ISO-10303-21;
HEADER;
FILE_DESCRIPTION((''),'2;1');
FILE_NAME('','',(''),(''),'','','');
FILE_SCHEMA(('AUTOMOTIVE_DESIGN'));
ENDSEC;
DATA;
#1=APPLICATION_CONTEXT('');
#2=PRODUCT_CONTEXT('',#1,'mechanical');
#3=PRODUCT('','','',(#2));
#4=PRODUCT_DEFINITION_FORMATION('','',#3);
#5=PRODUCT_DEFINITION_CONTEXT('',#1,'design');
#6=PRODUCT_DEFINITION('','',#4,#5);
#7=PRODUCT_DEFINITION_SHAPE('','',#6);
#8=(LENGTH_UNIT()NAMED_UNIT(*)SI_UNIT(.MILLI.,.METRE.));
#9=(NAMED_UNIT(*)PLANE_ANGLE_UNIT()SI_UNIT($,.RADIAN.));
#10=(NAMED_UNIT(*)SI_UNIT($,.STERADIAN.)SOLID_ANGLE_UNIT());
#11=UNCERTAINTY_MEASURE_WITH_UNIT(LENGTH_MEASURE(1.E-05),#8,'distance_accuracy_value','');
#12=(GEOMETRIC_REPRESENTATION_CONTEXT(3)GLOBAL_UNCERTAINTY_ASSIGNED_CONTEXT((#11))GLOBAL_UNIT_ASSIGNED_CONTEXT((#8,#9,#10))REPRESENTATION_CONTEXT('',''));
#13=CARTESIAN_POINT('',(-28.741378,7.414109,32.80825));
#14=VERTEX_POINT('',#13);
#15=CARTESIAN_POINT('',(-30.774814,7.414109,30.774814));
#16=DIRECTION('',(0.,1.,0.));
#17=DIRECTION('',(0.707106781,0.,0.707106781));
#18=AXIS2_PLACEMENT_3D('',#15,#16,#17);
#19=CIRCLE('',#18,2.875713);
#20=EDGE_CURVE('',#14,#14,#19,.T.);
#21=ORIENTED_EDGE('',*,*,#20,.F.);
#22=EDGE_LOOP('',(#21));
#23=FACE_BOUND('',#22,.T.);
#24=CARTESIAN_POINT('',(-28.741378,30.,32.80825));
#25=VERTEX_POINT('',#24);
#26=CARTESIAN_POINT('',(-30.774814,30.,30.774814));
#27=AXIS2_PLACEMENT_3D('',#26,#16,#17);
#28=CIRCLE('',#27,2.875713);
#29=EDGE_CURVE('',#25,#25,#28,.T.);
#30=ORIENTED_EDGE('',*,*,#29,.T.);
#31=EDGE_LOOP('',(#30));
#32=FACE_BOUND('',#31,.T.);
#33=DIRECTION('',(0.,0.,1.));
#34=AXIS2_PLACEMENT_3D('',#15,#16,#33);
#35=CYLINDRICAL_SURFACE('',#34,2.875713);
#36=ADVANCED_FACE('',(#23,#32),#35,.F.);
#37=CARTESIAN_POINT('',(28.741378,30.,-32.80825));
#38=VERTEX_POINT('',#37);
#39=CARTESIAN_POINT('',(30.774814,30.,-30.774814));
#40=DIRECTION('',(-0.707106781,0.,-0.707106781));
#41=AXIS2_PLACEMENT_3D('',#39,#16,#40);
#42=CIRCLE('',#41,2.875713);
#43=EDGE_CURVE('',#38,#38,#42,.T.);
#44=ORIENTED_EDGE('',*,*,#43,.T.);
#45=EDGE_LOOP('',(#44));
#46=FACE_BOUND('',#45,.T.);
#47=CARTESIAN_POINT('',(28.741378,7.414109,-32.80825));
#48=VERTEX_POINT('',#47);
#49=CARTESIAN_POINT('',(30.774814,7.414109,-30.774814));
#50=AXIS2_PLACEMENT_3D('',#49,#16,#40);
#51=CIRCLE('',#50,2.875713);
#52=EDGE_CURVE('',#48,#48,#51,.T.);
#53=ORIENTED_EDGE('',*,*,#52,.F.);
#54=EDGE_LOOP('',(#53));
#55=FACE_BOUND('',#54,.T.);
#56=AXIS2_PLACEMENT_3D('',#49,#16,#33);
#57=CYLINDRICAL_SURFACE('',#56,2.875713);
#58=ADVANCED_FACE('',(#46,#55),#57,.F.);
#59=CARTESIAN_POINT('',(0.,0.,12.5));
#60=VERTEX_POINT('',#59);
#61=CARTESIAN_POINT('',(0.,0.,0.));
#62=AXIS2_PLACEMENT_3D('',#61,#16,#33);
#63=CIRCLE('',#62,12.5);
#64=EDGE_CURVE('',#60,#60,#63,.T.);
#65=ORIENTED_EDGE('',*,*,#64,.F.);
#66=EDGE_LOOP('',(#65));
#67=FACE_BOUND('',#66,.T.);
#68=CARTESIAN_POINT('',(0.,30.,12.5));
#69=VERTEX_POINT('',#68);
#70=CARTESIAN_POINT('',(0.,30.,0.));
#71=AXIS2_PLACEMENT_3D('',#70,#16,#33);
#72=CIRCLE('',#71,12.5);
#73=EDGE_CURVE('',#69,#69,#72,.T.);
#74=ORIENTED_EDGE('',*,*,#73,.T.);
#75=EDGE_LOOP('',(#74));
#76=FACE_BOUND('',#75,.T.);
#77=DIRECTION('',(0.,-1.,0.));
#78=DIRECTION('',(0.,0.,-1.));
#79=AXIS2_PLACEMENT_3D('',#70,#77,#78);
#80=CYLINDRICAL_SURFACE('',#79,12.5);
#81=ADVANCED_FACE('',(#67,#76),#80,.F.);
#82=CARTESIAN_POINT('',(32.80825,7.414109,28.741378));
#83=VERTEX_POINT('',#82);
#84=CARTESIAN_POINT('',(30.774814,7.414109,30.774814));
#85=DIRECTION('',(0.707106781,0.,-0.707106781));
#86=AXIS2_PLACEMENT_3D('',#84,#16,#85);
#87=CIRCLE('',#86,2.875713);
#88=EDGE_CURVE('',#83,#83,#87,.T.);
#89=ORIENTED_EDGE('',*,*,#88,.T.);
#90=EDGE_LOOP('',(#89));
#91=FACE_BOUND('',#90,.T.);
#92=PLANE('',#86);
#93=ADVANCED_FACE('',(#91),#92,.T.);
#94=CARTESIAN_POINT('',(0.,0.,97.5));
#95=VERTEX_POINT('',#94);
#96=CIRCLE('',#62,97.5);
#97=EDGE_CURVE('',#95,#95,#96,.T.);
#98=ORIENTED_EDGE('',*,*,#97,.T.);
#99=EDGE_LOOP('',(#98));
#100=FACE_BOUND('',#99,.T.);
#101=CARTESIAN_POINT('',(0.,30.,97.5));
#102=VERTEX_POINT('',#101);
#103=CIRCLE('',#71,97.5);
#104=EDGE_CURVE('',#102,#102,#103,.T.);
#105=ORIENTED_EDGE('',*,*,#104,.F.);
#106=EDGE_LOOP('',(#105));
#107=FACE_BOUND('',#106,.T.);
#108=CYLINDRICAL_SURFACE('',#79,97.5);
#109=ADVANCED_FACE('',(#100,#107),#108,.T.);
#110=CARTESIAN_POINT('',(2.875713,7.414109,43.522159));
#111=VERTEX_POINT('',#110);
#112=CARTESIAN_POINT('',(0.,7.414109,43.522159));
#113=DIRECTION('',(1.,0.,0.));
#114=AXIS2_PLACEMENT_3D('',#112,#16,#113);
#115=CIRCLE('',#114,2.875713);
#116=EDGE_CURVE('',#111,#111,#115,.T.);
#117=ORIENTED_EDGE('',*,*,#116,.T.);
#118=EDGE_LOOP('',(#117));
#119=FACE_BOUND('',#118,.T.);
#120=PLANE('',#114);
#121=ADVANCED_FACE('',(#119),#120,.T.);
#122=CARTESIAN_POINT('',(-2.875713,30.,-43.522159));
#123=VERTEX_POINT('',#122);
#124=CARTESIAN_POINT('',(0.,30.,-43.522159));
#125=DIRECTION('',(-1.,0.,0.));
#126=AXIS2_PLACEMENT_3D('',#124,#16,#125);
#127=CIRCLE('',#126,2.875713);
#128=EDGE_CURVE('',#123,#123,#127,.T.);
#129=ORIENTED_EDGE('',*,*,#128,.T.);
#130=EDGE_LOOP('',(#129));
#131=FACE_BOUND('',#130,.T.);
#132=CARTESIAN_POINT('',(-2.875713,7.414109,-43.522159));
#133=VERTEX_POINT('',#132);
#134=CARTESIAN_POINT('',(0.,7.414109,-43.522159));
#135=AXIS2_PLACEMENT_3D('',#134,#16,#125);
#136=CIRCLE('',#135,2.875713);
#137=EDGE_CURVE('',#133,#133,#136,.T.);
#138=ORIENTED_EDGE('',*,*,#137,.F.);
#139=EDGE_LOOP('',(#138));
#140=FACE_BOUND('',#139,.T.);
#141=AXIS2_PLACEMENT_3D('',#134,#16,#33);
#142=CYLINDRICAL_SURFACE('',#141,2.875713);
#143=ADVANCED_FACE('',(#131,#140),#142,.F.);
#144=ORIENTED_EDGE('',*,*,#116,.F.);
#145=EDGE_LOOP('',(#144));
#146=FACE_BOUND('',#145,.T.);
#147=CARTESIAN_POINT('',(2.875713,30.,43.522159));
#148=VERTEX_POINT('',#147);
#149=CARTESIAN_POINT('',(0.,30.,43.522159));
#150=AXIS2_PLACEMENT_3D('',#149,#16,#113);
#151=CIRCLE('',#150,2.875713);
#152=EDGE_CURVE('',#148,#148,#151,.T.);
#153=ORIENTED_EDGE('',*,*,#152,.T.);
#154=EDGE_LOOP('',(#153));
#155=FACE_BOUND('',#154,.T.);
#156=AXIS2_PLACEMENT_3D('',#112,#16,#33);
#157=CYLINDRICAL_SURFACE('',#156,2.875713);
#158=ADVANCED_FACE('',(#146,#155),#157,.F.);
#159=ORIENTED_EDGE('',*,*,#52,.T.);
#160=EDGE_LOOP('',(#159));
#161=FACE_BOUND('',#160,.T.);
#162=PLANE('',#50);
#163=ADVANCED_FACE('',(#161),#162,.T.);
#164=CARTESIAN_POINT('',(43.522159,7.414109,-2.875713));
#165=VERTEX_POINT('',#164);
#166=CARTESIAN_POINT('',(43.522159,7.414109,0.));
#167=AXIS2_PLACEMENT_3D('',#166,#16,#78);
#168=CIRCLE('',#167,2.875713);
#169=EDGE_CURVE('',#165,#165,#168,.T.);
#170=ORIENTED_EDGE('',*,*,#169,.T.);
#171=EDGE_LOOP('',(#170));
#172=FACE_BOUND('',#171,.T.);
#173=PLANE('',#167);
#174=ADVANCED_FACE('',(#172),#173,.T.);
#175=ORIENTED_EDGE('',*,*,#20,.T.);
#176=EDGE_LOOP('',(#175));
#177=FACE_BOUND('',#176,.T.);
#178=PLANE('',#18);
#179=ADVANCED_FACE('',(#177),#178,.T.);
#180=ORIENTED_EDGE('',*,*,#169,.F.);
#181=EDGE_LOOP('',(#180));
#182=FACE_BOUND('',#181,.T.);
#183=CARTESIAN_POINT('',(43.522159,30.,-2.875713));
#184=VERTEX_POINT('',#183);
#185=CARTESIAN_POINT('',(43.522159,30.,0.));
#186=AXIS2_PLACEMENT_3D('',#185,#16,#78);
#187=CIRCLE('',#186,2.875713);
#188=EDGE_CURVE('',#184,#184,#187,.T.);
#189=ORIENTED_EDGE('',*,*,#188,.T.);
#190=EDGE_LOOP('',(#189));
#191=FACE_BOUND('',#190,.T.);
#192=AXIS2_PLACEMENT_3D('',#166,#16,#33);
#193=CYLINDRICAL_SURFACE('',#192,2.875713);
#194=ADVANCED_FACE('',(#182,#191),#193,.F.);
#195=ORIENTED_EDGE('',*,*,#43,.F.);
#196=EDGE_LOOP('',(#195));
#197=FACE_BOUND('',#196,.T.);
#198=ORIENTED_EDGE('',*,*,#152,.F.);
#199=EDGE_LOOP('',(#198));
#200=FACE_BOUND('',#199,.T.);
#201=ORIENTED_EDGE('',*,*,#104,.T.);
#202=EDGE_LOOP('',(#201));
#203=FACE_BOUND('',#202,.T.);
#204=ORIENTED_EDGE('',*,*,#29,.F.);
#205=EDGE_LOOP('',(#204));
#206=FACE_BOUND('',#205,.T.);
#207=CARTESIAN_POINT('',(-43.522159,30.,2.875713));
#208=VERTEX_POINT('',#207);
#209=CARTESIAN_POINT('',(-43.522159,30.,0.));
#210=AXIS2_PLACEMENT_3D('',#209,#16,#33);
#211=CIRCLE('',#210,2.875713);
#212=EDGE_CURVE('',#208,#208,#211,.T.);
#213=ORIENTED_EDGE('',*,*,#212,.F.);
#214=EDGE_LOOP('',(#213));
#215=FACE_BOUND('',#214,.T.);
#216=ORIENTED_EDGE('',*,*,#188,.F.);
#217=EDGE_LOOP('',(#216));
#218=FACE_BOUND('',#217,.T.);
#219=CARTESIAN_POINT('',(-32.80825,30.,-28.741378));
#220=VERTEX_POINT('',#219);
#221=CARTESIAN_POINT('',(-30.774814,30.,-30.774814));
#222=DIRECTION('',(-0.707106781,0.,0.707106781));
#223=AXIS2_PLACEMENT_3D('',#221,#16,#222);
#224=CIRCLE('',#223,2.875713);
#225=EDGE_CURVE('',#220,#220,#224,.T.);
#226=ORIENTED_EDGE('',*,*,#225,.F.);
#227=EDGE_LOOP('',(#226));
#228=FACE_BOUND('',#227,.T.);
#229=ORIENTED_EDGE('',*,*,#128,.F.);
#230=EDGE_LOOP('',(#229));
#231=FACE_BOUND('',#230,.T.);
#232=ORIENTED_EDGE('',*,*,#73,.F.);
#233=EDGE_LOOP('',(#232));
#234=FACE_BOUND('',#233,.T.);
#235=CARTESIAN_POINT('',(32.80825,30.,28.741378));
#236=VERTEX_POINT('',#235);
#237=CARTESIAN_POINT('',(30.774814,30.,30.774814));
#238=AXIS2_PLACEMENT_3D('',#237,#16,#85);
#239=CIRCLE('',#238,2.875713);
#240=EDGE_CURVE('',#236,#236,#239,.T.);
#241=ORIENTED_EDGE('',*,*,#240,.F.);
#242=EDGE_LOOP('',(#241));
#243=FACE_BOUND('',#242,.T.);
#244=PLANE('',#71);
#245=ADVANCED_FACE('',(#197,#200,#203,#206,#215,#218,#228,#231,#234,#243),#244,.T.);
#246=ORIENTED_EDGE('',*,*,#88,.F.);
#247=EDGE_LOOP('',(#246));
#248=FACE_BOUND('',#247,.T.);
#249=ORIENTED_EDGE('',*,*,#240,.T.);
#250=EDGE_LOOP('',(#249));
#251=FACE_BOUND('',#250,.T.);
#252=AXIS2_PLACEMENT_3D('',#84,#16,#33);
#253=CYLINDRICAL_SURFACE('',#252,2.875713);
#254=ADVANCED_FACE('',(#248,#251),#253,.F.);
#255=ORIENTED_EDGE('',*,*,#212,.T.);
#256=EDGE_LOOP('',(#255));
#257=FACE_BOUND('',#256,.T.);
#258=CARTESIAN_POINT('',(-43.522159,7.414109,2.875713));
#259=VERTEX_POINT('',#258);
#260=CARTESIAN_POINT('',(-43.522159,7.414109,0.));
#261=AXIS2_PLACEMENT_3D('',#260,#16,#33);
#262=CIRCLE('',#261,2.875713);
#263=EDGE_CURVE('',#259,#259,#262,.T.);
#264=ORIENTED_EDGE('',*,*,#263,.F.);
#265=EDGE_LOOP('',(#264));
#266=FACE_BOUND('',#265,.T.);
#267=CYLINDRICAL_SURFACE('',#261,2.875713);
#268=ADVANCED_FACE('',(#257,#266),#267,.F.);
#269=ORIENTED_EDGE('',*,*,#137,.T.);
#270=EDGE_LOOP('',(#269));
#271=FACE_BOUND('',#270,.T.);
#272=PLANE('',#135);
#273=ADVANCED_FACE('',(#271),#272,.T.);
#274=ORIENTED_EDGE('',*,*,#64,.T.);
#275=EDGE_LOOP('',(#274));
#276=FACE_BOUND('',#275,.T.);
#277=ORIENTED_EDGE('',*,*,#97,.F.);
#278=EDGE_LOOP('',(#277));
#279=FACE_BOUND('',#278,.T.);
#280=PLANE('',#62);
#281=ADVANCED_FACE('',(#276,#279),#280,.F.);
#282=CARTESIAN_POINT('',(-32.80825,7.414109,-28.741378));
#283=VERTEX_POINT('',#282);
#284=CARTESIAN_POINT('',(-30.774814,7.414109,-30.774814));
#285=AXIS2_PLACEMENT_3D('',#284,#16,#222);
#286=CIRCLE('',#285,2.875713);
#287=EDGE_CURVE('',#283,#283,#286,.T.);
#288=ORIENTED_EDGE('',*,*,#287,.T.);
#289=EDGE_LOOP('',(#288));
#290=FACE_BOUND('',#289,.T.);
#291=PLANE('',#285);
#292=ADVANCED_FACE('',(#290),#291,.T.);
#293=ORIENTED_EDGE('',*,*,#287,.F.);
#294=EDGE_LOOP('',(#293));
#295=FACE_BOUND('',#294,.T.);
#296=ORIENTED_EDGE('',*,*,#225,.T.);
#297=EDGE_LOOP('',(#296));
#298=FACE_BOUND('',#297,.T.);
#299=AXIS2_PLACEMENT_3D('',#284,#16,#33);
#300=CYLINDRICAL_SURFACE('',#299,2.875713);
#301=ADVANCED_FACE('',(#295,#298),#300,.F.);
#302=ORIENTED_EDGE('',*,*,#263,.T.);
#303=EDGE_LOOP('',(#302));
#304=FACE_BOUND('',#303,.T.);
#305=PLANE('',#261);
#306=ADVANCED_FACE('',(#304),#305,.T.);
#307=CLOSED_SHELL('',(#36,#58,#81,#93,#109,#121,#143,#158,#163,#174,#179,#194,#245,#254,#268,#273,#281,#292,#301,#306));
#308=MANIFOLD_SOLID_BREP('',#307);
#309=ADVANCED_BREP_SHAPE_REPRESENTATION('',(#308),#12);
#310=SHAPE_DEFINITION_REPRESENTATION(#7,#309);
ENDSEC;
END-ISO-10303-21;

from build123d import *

# Parameters (mm, degrees)
SKETCH1_R           = 97.5
BOSS_EXTRUDE1_DEPTH = 30
SKETCH2_R           = 12.5
CUT_EXTRUDE1_DEPTH  = 142.111657917
SKETCH3_R           = 2.875712839
CUT_EXTRUDE2_DEPTH  = 22.585890954
CIRPATTERN1_COUNT   = 8


with BuildPart() as part:
    # Sketch1 → Boss-Extrude1 (new body)
    with BuildSketch(Plane(origin=(0, 0, 0), x_dir=(1, 0, 0), z_dir=(0, 1, 0))):
        Circle(SKETCH1_R)
    extrude(amount=BOSS_EXTRUDE1_DEPTH)

    # Sketch2 → Cut-Extrude1 (cut, through all)
    with BuildSketch(Plane(origin=(0, 0, 0), x_dir=(1, 0, 0), z_dir=(0, 1, 0))):
        Circle(SKETCH2_R)
    extrude(amount=CUT_EXTRUDE1_DEPTH, mode=Mode.SUBTRACT)

    # Sketch3 → Cut-Extrude2 (cut)
    with BuildSketch(Plane(origin=(0, 30, 0), x_dir=(1, 0, 0), z_dir=(0, 1, 0))):
        with Locations((-43.522159415, 0)):
            Circle(SKETCH3_R)
    cut_extrude2 = extrude(amount=-CUT_EXTRUDE2_DEPTH, mode=Mode.SUBTRACT)

    # CirPattern1: Cut-Extrude2 ×8 about axis
    cirpattern1_axis = Axis((0, 0, 0), (0, 1, 0))
    for i in range(1, CIRPATTERN1_COUNT):
        add(cut_extrude2.rotate(cirpattern1_axis, i * 360 / CIRPATTERN1_COUNT), mode=Mode.SUBTRACT)


solid = part.part
